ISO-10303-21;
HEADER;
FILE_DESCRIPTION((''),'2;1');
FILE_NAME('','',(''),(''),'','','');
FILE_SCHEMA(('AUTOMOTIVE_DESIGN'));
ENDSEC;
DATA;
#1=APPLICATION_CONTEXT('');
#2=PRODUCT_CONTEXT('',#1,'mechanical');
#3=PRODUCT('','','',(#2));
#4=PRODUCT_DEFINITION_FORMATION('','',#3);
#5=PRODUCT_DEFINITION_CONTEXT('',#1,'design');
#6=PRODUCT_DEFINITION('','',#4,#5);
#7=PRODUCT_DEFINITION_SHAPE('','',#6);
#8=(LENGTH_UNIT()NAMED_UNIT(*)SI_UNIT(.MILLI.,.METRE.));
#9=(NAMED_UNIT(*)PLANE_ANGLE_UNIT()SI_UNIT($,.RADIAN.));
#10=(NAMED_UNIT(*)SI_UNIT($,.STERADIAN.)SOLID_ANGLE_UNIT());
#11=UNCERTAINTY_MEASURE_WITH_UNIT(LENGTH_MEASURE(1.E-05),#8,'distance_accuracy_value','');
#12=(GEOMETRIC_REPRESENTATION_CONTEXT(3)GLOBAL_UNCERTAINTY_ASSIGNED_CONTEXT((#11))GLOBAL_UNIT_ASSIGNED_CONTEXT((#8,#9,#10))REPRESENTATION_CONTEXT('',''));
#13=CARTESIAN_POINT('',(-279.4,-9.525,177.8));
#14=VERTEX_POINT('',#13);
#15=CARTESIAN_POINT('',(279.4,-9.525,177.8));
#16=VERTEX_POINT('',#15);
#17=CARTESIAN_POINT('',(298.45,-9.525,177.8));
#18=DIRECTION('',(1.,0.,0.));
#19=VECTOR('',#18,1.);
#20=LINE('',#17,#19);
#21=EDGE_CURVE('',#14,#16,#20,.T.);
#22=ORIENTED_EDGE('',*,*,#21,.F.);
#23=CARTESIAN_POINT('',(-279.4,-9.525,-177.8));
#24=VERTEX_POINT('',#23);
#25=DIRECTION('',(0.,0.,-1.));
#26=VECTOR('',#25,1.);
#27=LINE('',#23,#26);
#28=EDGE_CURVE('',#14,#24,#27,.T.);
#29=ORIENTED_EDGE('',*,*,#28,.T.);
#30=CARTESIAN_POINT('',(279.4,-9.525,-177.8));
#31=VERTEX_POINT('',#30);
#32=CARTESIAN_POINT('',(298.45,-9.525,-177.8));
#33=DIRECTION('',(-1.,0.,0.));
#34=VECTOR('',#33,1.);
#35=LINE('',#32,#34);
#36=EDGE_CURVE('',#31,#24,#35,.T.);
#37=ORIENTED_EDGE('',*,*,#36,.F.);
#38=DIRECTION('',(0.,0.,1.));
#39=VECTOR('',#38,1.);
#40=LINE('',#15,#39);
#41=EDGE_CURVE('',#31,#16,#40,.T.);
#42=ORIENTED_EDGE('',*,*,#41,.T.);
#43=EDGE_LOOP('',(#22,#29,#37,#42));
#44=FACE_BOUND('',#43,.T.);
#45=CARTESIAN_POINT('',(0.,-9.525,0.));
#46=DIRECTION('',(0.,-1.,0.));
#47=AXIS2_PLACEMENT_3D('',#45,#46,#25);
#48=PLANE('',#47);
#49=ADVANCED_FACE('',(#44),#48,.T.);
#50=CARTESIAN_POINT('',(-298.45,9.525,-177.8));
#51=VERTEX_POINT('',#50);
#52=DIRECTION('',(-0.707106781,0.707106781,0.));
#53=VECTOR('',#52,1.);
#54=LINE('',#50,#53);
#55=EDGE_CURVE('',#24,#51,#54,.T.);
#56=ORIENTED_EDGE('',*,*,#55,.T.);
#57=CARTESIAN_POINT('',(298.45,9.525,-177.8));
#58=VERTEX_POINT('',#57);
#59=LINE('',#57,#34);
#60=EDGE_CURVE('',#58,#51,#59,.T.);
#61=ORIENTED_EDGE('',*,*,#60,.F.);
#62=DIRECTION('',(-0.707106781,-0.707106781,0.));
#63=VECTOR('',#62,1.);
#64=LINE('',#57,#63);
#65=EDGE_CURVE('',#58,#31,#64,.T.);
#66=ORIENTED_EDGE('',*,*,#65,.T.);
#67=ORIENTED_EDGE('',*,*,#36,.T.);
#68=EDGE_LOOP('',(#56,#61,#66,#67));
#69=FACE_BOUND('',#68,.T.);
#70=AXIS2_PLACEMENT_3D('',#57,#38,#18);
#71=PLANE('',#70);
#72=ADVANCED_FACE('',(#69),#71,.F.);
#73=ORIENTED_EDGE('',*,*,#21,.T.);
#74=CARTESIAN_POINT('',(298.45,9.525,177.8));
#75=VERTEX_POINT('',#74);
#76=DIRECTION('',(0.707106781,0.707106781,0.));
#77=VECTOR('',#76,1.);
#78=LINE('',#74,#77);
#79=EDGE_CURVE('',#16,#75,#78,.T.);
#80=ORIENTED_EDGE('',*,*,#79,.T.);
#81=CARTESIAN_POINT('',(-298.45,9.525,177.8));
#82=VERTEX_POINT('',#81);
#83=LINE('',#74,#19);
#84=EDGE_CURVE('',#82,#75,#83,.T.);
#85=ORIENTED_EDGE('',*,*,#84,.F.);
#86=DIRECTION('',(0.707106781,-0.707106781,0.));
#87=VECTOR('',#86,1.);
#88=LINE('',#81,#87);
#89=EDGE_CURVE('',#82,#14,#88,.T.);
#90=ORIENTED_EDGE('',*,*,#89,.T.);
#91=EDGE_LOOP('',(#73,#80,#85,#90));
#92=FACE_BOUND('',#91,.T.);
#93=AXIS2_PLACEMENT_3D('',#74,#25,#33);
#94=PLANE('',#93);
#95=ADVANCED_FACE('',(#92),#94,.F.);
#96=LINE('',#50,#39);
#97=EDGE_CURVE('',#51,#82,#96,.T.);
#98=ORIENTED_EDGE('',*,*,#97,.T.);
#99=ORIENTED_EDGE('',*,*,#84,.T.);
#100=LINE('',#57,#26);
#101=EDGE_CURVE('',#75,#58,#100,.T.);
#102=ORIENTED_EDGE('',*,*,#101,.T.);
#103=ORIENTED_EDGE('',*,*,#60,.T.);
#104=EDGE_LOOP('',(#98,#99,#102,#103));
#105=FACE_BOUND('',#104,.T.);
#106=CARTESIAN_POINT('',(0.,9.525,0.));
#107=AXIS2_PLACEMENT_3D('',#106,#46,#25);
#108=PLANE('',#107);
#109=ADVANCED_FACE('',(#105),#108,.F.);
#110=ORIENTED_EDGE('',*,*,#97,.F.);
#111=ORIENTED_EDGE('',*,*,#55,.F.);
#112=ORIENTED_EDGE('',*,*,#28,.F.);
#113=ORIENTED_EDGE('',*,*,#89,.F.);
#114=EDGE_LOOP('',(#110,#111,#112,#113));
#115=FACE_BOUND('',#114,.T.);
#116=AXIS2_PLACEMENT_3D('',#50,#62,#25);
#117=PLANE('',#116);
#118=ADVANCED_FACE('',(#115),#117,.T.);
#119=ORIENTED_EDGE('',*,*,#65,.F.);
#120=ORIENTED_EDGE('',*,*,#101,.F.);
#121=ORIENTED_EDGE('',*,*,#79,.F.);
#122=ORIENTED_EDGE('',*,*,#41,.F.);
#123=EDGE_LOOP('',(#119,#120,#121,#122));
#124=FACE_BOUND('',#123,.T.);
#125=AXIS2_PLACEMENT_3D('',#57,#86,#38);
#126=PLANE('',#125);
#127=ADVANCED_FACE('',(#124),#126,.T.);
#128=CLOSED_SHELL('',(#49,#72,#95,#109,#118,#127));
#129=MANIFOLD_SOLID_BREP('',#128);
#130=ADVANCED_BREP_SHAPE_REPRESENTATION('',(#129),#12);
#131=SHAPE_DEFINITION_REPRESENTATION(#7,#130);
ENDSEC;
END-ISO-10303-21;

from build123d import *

# Parameters (mm, degrees)
SKETCH1_W           = 596.9
SKETCH1_H           = 355.6
BOSS_EXTRUDE1_DEPTH = 9.525
CHAMFER1_SIZE       = 19.05


with BuildPart() as part:
    # Sketch1 → Boss-Extrude1 (new, symmetric)
    with BuildSketch(Plane(origin=(0, 0, 0), x_dir=(1, 0, 0), z_dir=(0, 1, 0))):
        Rectangle(SKETCH1_W, SKETCH1_H)
    extrude(amount=BOSS_EXTRUDE1_DEPTH, both=True)

    # Chamfer1
    chamfer1_edges = [part.edges().sort_by_distance(p)[0] for p in [
        (298.45, -9.525, 0),
        (-298.45, -9.525, 0),
    ]]
    chamfer(chamfer1_edges, length=CHAMFER1_SIZE - 0.0001)  # a hair under: the kernel refuses the full size


solid = part.part
